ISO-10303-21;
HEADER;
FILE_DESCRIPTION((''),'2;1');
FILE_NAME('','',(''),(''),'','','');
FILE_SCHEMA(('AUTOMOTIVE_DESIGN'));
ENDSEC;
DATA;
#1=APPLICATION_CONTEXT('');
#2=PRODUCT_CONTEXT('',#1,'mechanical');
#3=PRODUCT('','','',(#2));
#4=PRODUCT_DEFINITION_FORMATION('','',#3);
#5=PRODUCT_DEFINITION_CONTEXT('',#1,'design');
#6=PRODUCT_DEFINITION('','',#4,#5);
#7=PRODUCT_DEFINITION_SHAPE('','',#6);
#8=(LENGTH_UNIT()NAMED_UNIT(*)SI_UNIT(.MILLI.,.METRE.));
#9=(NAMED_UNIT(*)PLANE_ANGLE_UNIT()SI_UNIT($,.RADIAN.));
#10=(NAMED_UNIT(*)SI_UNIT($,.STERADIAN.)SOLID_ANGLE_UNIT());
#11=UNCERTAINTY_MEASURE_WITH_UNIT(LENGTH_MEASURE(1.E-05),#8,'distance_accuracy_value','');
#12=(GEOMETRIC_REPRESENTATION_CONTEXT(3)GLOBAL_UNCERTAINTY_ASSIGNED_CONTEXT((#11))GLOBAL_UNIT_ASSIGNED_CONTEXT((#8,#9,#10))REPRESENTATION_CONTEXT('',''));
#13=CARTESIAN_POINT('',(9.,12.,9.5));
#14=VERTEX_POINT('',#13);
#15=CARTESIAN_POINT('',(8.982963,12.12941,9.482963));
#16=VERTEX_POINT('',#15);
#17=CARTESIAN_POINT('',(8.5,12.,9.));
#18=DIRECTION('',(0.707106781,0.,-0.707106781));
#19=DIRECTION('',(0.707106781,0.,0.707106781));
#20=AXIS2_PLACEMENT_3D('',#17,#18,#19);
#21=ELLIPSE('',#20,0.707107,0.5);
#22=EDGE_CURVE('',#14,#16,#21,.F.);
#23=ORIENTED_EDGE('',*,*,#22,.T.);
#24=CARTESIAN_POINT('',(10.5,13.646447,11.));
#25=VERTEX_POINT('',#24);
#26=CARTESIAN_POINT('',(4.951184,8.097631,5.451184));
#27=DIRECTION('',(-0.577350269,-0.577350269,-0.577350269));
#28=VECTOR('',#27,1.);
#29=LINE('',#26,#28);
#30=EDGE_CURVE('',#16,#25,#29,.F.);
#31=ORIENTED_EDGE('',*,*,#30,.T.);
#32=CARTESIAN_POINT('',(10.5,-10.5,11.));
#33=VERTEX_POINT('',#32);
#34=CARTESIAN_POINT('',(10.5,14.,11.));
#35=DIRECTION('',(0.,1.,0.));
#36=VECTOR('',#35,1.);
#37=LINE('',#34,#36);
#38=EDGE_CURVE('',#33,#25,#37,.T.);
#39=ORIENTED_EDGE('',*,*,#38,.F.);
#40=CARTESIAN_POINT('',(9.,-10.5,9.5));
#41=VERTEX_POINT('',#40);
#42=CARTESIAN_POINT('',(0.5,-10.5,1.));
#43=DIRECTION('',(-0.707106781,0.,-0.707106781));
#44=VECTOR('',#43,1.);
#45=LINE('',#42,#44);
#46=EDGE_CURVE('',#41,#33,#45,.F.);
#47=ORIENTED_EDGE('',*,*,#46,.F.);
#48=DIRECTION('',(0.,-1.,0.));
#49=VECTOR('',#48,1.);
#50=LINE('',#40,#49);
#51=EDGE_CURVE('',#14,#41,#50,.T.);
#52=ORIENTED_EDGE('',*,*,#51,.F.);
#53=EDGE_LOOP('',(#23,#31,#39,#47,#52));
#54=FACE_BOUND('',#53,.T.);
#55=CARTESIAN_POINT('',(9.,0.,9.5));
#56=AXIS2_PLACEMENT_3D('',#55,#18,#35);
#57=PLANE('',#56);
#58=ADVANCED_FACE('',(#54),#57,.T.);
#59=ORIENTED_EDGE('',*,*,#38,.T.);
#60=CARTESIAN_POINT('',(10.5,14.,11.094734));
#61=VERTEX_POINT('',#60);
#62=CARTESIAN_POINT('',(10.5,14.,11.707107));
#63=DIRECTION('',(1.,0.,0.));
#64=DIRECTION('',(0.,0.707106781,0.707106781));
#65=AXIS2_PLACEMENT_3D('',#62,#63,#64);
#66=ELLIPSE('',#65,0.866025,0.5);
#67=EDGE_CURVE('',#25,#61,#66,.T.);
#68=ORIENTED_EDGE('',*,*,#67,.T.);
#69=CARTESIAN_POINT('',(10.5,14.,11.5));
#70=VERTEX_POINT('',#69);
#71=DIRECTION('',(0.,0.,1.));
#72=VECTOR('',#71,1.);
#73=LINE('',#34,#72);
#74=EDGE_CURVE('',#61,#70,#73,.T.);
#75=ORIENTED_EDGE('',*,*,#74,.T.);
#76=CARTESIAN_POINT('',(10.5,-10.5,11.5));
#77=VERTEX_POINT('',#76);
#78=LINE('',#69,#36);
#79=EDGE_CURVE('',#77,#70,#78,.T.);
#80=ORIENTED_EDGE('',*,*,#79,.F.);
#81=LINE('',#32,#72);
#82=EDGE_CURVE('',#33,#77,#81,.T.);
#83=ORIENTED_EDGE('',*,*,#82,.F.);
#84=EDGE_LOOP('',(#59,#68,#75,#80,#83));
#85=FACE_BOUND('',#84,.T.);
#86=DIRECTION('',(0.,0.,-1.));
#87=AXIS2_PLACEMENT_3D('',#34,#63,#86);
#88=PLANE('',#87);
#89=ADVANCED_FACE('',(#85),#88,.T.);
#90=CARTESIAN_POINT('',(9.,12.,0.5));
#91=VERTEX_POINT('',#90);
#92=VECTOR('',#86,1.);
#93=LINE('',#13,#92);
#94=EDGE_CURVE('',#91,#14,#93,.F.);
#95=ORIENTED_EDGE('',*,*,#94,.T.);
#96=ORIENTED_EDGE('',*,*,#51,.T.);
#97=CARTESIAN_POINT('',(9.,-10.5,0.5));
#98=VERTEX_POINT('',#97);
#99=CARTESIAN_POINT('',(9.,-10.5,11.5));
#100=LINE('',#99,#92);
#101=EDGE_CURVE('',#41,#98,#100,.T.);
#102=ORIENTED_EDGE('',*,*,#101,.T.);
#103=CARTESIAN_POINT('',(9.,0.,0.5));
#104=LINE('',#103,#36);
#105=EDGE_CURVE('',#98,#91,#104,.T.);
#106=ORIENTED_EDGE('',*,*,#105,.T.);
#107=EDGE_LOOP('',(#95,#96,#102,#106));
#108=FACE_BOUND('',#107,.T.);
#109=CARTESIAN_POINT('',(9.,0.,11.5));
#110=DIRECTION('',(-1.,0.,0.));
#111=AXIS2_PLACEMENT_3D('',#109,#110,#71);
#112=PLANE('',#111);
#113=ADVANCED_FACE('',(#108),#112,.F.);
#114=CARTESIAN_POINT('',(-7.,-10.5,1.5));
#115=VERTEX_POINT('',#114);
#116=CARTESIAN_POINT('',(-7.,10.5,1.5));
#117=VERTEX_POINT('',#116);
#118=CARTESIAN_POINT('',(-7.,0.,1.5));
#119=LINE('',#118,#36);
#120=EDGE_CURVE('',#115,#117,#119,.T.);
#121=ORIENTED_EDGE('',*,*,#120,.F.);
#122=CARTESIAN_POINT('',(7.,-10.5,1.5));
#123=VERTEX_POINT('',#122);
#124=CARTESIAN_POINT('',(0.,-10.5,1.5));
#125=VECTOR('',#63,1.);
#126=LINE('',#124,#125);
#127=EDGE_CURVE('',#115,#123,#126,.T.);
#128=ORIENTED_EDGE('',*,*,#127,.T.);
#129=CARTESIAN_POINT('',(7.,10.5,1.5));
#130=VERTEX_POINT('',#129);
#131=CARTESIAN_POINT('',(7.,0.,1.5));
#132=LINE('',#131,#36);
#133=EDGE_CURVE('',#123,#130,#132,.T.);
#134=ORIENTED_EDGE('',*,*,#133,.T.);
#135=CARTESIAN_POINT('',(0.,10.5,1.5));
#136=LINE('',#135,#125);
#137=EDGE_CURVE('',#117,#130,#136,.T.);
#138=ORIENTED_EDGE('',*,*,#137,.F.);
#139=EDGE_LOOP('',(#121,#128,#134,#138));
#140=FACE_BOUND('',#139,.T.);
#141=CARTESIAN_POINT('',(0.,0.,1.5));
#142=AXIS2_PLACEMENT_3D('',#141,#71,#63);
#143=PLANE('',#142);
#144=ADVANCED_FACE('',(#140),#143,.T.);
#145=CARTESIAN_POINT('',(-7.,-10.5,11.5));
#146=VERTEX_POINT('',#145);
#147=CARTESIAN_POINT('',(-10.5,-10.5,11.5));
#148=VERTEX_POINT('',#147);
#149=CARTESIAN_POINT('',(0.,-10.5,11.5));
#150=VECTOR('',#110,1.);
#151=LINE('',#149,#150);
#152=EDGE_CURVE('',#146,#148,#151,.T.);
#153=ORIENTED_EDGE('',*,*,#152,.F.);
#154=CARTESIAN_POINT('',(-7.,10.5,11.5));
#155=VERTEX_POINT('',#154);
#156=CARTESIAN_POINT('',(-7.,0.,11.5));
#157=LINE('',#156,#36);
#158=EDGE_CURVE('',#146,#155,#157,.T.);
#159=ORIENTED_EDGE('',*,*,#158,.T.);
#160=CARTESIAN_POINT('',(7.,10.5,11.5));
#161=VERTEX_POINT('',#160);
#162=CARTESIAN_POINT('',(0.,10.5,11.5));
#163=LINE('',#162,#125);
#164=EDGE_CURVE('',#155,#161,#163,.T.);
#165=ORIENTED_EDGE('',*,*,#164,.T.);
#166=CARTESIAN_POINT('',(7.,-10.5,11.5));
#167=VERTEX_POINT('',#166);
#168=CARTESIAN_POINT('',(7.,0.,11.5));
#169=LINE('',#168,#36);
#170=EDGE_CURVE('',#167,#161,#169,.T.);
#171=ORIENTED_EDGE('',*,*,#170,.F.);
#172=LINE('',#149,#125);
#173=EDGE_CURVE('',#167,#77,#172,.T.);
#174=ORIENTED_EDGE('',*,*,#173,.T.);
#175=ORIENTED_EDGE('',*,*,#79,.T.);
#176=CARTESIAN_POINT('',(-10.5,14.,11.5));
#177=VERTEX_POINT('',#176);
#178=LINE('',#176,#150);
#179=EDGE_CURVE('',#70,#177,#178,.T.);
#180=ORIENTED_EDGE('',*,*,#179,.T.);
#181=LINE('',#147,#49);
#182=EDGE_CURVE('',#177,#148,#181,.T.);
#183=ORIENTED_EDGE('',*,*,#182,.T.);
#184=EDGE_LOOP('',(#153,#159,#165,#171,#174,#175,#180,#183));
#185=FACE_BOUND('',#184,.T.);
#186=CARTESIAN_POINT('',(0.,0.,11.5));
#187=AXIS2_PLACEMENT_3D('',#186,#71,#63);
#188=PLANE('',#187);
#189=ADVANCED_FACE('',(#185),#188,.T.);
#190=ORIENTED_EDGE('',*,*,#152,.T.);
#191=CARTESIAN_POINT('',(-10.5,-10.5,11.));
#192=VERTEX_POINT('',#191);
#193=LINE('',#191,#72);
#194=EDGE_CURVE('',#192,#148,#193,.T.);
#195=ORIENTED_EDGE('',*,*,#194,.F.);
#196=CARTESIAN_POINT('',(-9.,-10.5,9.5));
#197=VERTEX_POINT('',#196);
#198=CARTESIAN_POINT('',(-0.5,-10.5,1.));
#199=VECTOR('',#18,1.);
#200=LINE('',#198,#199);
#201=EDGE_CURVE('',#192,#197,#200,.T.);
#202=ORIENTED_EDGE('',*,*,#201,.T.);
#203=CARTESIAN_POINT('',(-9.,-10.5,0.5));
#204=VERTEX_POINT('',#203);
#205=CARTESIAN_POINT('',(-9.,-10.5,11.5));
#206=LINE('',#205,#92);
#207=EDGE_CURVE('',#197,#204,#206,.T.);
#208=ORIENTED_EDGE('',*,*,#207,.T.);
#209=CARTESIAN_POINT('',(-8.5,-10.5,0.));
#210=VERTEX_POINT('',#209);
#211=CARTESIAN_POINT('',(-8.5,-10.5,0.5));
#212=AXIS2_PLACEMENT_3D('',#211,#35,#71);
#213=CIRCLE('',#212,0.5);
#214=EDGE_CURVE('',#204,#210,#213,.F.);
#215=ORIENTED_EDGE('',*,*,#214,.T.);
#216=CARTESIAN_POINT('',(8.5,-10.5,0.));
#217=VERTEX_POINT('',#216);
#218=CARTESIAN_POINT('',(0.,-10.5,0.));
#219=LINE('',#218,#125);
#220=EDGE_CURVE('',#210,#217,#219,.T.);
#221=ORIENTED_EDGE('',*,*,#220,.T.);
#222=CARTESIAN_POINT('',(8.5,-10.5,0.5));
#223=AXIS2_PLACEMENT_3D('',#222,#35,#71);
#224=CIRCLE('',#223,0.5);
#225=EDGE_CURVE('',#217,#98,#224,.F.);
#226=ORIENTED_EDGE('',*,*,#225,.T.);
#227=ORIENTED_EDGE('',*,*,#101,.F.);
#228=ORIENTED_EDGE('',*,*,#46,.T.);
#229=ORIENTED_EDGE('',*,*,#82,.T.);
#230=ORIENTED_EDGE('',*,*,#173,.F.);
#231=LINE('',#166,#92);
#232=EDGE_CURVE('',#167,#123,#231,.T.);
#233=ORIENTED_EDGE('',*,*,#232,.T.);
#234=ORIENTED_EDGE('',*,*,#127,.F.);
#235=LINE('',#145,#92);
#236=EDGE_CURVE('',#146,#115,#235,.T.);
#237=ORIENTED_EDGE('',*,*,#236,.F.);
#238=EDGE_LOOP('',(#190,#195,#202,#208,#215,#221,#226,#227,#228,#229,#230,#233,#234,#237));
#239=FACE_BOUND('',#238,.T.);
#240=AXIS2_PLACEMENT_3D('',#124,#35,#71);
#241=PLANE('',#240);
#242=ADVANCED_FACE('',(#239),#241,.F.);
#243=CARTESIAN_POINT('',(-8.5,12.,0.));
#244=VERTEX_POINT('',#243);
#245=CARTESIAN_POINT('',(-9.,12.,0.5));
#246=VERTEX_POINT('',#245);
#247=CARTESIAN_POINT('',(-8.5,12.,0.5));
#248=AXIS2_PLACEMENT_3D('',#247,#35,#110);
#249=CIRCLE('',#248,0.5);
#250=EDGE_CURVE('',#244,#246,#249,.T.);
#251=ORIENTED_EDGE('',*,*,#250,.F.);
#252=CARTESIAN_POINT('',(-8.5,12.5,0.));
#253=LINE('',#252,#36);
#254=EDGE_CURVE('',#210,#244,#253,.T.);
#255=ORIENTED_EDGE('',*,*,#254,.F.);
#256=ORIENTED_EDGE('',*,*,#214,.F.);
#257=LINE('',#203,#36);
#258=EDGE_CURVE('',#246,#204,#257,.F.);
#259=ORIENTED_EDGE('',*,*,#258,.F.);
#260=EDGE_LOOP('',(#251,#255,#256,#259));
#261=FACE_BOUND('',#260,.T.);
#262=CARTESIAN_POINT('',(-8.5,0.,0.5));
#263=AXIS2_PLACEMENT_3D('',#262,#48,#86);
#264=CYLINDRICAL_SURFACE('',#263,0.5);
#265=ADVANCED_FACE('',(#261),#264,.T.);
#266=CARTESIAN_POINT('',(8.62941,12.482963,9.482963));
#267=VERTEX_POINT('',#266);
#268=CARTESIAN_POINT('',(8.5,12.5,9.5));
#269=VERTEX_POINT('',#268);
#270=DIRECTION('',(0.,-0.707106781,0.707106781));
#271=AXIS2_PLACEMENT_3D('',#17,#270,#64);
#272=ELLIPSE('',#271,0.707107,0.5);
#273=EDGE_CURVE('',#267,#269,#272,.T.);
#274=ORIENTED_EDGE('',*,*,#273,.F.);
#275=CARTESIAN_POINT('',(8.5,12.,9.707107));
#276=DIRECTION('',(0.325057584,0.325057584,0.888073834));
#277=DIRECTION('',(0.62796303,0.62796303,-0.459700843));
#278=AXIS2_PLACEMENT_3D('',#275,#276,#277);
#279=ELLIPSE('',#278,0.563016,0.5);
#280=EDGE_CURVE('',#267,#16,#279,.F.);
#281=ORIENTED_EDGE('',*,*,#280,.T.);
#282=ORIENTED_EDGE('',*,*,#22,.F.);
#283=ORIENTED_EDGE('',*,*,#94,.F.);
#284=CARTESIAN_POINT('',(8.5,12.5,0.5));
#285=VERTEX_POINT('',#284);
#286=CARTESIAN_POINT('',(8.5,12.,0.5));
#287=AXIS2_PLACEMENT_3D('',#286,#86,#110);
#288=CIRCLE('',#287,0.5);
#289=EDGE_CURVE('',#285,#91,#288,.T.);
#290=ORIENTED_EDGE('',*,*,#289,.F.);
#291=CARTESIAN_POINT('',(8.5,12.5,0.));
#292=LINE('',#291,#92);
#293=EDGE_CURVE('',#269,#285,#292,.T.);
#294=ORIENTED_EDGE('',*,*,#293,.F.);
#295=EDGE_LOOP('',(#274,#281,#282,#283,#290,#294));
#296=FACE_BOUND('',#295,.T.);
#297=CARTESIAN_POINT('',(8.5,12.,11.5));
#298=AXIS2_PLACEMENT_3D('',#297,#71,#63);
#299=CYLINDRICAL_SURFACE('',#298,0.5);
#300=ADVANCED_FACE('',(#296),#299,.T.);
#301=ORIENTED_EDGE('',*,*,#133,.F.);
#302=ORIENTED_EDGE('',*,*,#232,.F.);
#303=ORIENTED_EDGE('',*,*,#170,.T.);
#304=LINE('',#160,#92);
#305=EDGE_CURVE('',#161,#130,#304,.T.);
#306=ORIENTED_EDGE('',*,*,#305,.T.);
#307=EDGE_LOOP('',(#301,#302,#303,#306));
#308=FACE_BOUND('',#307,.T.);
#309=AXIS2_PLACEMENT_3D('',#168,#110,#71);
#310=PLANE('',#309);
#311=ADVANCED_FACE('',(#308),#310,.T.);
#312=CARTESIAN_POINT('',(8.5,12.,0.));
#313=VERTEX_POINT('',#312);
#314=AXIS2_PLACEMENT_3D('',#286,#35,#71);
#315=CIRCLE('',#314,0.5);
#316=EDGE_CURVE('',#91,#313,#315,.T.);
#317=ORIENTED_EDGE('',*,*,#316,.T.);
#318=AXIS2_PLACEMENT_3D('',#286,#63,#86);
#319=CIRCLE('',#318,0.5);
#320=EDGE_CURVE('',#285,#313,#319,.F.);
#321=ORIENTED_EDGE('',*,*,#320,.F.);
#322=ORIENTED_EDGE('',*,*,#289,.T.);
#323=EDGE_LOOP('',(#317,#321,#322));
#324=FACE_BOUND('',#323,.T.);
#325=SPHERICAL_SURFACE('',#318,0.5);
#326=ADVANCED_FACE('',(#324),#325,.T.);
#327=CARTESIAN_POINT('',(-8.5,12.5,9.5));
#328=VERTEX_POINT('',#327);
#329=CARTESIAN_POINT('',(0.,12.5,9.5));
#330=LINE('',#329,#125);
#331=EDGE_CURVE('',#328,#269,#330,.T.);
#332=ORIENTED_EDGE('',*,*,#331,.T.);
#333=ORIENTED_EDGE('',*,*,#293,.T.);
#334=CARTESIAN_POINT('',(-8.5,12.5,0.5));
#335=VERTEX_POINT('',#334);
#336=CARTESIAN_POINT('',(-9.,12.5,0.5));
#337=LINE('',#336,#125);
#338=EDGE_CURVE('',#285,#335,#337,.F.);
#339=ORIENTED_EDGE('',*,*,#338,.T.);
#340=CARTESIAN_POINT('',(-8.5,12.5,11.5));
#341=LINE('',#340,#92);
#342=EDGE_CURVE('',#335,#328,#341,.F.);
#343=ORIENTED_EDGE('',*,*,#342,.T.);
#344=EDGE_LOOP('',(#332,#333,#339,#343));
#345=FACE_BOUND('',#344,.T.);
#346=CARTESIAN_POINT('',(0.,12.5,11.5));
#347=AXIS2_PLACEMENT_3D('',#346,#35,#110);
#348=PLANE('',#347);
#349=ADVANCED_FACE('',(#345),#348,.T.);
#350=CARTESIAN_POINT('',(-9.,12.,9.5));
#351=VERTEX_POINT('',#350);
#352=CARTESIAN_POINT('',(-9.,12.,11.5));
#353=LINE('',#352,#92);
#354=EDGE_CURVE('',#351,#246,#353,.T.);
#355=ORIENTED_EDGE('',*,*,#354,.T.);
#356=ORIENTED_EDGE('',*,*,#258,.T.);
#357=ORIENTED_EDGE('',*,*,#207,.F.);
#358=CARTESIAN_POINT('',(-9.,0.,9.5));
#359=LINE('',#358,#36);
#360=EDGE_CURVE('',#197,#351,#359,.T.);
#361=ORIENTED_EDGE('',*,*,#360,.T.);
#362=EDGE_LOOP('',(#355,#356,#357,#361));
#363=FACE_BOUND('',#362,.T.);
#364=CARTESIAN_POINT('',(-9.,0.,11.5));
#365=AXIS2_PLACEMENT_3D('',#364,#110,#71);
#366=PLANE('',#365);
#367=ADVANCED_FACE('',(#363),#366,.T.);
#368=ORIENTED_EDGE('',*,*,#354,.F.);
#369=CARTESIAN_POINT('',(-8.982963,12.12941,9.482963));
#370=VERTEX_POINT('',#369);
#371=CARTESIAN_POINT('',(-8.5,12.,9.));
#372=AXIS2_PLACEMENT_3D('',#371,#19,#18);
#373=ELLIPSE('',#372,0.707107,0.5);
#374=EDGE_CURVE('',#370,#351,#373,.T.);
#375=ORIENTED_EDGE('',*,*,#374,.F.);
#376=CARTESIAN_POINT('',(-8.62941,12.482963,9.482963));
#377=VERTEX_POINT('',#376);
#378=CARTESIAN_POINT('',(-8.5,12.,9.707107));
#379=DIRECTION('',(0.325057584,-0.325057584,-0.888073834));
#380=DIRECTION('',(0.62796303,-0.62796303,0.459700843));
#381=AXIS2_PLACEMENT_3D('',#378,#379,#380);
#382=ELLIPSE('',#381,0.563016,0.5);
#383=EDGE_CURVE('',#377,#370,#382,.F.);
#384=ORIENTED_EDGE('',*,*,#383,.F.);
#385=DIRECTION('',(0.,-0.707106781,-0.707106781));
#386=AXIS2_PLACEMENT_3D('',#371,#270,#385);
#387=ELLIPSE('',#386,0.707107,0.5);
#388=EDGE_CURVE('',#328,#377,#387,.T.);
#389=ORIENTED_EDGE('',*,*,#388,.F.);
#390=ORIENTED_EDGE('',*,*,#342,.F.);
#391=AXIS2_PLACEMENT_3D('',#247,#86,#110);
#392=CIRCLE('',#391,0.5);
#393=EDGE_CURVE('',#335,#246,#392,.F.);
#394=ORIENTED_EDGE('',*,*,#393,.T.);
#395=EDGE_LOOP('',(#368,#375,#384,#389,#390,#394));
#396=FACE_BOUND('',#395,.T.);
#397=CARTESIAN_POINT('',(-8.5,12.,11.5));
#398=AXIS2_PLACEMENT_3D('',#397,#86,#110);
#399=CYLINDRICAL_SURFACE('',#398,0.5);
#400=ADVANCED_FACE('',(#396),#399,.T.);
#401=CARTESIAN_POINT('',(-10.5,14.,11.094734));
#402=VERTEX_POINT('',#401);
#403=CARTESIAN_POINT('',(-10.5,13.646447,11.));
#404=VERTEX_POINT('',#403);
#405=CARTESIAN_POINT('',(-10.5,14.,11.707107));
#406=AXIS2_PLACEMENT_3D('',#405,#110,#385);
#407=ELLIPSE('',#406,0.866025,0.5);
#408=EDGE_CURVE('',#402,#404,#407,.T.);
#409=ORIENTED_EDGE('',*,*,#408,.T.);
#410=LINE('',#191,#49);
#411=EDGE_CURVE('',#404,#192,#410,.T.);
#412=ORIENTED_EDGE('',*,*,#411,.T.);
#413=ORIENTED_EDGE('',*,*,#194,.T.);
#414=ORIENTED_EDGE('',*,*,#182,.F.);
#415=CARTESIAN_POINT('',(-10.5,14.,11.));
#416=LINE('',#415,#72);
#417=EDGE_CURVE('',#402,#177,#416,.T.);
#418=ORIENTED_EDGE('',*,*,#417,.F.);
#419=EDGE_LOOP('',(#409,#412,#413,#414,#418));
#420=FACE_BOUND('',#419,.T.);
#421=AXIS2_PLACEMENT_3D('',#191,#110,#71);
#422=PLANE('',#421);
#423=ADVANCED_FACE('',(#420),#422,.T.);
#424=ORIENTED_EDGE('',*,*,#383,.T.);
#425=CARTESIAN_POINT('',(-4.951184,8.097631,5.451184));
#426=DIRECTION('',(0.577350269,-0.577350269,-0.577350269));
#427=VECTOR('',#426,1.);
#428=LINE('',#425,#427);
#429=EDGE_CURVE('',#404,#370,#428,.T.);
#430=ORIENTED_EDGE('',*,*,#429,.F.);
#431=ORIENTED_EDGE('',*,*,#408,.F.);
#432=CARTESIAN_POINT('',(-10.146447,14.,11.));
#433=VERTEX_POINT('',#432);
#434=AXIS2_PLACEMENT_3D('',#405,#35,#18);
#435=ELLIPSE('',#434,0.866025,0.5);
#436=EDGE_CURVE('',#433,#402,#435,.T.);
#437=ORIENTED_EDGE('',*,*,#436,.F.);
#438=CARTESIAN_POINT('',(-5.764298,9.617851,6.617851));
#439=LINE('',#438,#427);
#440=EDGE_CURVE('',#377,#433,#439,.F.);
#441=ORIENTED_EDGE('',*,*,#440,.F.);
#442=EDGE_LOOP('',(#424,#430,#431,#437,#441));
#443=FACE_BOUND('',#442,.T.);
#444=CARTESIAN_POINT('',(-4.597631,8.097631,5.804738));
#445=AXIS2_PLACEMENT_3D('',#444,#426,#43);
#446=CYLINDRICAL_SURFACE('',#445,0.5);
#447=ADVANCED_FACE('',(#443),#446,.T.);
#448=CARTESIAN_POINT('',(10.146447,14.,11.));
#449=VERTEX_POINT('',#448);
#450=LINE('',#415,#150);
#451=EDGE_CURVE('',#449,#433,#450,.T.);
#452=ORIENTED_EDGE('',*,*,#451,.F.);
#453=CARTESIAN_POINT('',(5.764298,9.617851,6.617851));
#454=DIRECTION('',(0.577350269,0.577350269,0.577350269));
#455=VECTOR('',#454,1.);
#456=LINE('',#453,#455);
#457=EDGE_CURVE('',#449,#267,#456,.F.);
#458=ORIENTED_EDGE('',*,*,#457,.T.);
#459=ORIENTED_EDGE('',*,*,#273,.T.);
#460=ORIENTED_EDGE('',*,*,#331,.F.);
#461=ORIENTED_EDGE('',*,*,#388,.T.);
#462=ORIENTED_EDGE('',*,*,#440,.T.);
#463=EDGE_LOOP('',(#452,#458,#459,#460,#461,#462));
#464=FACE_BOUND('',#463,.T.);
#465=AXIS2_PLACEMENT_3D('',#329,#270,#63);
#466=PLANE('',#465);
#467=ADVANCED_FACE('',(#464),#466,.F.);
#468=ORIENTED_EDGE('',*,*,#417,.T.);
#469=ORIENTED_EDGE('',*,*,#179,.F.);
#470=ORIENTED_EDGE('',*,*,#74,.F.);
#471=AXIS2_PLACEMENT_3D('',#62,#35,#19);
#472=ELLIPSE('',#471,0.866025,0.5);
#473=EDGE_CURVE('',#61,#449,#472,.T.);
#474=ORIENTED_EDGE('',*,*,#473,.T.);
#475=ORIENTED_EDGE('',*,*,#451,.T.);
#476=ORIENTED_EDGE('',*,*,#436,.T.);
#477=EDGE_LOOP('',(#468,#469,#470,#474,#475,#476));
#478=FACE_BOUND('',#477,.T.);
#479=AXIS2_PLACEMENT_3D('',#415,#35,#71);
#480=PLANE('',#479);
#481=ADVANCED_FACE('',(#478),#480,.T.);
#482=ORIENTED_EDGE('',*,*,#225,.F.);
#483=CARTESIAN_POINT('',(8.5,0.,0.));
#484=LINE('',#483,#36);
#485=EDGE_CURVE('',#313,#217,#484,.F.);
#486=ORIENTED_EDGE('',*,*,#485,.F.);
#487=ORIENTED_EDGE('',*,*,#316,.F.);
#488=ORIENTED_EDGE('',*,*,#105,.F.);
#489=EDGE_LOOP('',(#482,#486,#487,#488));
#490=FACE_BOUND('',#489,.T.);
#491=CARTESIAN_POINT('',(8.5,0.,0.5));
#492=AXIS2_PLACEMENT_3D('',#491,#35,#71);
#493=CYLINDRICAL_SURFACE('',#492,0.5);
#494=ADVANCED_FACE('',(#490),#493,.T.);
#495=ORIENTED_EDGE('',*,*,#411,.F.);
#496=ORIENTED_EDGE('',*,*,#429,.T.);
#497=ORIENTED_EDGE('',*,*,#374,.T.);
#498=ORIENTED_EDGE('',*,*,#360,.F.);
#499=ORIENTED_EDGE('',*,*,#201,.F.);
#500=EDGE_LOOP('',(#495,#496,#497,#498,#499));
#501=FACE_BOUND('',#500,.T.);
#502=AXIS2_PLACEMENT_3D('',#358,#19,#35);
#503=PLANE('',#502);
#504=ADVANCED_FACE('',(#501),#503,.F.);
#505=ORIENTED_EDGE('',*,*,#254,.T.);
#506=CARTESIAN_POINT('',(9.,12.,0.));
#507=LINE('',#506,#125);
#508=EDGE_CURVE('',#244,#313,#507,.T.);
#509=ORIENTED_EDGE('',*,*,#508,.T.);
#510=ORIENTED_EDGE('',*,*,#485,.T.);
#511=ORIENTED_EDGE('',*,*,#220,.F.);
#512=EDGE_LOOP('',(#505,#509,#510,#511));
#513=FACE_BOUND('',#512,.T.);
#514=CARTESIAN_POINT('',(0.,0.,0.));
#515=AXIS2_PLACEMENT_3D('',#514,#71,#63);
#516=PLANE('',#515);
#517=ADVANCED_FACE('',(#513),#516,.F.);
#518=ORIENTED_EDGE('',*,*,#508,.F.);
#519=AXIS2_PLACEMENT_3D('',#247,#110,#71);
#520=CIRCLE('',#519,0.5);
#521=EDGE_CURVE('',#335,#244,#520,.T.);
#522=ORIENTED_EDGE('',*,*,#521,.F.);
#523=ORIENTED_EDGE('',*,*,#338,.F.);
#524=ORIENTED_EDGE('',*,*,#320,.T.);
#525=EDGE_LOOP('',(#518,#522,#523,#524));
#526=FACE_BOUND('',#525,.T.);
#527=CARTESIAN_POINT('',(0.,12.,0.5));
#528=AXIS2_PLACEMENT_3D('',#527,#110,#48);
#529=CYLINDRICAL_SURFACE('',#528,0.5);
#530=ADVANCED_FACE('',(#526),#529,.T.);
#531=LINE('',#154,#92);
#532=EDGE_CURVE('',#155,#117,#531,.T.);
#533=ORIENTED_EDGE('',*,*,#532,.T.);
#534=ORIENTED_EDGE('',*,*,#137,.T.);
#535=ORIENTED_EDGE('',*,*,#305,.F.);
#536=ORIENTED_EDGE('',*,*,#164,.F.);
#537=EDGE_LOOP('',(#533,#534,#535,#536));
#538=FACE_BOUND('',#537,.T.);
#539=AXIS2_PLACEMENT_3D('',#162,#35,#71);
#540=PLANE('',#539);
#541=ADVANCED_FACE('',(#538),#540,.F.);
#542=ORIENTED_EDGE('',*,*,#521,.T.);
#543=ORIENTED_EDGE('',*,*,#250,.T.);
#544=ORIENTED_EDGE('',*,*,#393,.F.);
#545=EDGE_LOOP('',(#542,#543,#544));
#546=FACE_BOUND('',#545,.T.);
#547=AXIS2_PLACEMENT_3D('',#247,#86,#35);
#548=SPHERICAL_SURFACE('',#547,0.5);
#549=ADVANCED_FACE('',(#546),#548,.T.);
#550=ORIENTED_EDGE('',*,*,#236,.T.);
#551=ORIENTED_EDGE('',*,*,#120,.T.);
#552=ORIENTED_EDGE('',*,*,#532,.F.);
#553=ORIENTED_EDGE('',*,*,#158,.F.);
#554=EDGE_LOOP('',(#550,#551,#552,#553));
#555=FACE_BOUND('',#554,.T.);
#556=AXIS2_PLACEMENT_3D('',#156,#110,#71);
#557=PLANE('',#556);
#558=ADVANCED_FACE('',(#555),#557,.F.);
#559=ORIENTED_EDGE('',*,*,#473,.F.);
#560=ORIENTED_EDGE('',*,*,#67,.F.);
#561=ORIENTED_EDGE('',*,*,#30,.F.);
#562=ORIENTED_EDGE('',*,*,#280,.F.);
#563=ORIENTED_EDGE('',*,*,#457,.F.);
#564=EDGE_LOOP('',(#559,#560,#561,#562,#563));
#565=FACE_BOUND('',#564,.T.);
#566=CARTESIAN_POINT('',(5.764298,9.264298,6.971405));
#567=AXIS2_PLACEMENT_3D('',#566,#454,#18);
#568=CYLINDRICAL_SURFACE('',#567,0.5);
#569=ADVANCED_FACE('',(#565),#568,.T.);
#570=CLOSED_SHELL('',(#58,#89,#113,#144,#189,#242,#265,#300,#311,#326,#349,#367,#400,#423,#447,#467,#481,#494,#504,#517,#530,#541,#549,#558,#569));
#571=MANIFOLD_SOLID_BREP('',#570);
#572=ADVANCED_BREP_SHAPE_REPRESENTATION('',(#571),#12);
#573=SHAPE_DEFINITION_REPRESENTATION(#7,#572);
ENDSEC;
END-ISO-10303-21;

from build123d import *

# Parameters (mm, degrees)
SKETCH1_W           = 14
SKETCH1_H           = 21
BOSS_EXTRUDE1_DEPTH = 1.5
BOSS_EXTRUDE2_DEPTH = 11.5
BOSS_EXTRUDE3_DEPTH = 0.5
CHAMFER1_SIZE       = 1.5
FILLET1_R           = 0.5


# Some blends are built 0.0001 mm under size
with BuildPart() as part:
    # Sketch1 → Boss-Extrude1 (new body)
    with BuildSketch(Plane.XY):
        Rectangle(SKETCH1_W, SKETCH1_H)
    extrude(amount=BOSS_EXTRUDE1_DEPTH)

    # Sketch1<4> → Boss-Extrude2 (add)
    with BuildSketch(Plane.XY):
        Polygon((-9, 12.5), (-9, -10.5), (-7, -10.5), (-7, 10.5), (7, 10.5), (7, -10.5), (9, -10.5), (9, 12.5), align=None)
    extrude(amount=BOSS_EXTRUDE2_DEPTH)

    # Sketch2 → Boss-Extrude3 (add)
    with BuildSketch(Plane.XY.offset(11.5)):
        Polygon((-9, -10.5), (-9, 12.5), (9, 12.5), (9, -10.5), (10.5, -10.5), (10.5, 14), (-10.5, 14), (-10.5, -10.5), align=None)
    extrude(amount=-BOSS_EXTRUDE3_DEPTH)

    # Chamfer1
    chamfer1_edges = [part.edges().sort_by_distance(p)[0] for p in [
        (-9, 1, 11),
        (0, 12.5, 11),
        (9, 1, 11),
    ]]
    chamfer(chamfer1_edges, length=CHAMFER1_SIZE - 0.0001)  # a hair under: the kernel refuses the full size

    # Fillet1
    # the kernel refuses this fillet: 0.5 mm, written as the material it takes off along each edge
    with BuildSketch(Plane(origin=(8.5, 12, 0.5), x_dir=(0, 0, -1), z_dir=(0, 1, 0))) as fillet1_piece_1_section:
        Polygon((0, 0), (FILLET1_R * 1.02, 0), (FILLET1_R * 1.02, -FILLET1_R * 1.02), (0, -FILLET1_R * 1.02), align=None)
    fillet1_piece_1 = extrude(amount=FILLET1_R * 1.02, mode=Mode.PRIVATE)
    fillet1_piece_1 = fillet1_piece_1 - Plane(origin=(8.5, 12, 0.5), x_dir=(-0.7071067811865475, 0, 0.7071067811865475), z_dir=(0, 1, 0)) * Sphere(FILLET1_R, mode=Mode.PRIVATE)
    add(fillet1_piece_1, mode=Mode.SUBTRACT)
    with BuildSketch(Plane(origin=(-8.5, 12, 0.5), x_dir=(0, 0, -1), z_dir=(-1, 0, 0))) as fillet1_piece_2_section:
        Polygon((0, 0), (FILLET1_R * 1.02, 0), (FILLET1_R * 1.02, -FILLET1_R * 1.02), (0, -FILLET1_R * 1.02), align=None)
    fillet1_piece_2 = extrude(amount=FILLET1_R * 1.02, mode=Mode.PRIVATE)
    fillet1_piece_2 = fillet1_piece_2 - Plane(origin=(-8.5, 12, 0.5), x_dir=(0, -0.7071067811865475, 0.7071067811865475), z_dir=(-1, 0, 0)) * Sphere(FILLET1_R, mode=Mode.PRIVATE)
    add(fillet1_piece_2, mode=Mode.SUBTRACT)
    with BuildSketch(Plane(origin=(9, -11.75, 0), x_dir=(-1, 0, 0), z_dir=(0, 1, 0))) as fillet1_piece_3:
        with BuildLine():
            CenterArc((FILLET1_R, FILLET1_R), FILLET1_R, 180, 90)
            Line((0, FILLET1_R), (-FILLET1_R * 0.02, FILLET1_R))
            Line((-FILLET1_R * 0.02, FILLET1_R), (-FILLET1_R * 0.02, -FILLET1_R * 0.02))
            Line((-FILLET1_R * 0.02, -FILLET1_R * 0.02), (FILLET1_R, -FILLET1_R * 0.02))
            Line((FILLET1_R, -FILLET1_R * 0.02), (FILLET1_R, 0))
        make_face()
    extrude(amount=23.75, mode=Mode.SUBTRACT)
    with BuildSketch(Plane(origin=(-9, 12, 0), x_dir=(0, 0, 1), z_dir=(0, -1, 0))) as fillet1_piece_4:
        with BuildLine():
            CenterArc((FILLET1_R, -FILLET1_R), FILLET1_R, 90, 90)
            Line((0, -FILLET1_R), (-FILLET1_R * 0.02, -FILLET1_R))
            Line((-FILLET1_R * 0.02, -FILLET1_R), (-FILLET1_R * 0.02, FILLET1_R * 0.02))
            Line((-FILLET1_R * 0.02, FILLET1_R * 0.02), (FILLET1_R, FILLET1_R * 0.02))
            Line((FILLET1_R, FILLET1_R * 0.02), (FILLET1_R, 0))
        make_face()
    extrude(amount=23.75, mode=Mode.SUBTRACT)
    with BuildSketch(Plane(origin=(8.5, 12.5, 0), x_dir=(0, -1, 0), z_dir=(-1, 0, 0))) as fillet1_piece_5:
        with BuildLine():
            CenterArc((FILLET1_R, FILLET1_R), FILLET1_R, 180, 90)
            Line((0, FILLET1_R), (-FILLET1_R * 0.02, FILLET1_R))
            Line((-FILLET1_R * 0.02, FILLET1_R), (-FILLET1_R * 0.02, -FILLET1_R * 0.02))
            Line((-FILLET1_R * 0.02, -FILLET1_R * 0.02), (FILLET1_R, -FILLET1_R * 0.02))
            Line((FILLET1_R, -FILLET1_R * 0.02), (FILLET1_R, 0))
        make_face()
    extrude(amount=17, mode=Mode.SUBTRACT)
    with BuildSketch(Plane(origin=(-9, 12.5, 0.5), x_dir=(0, -1, 0), z_dir=(0, 0, 1))) as fillet1_piece_6_section:
        with BuildLine():
            CenterArc((FILLET1_R, FILLET1_R), FILLET1_R, 180, 90)
            Line((0, FILLET1_R), (-FILLET1_R * 0.02, FILLET1_R))
            Line((-FILLET1_R * 0.02, FILLET1_R), (-FILLET1_R * 0.02, -FILLET1_R * 0.02))
            Line((-FILLET1_R * 0.02, -FILLET1_R * 0.02), (FILLET1_R, -FILLET1_R * 0.02))
            Line((FILLET1_R, -FILLET1_R * 0.02), (FILLET1_R, 0))
        make_face()
    fillet1_piece_6 = extrude(amount=10.2501, mode=Mode.PRIVATE)
    fillet1_piece_6 = split(fillet1_piece_6, bisect_by=Plane(origin=(-6.646616443, 12.387329395, 7.146716443), z_dir=(-0.7071067811865476, 0, -0.7071067811865476)), keep=Keep.TOP, mode=Mode.PRIVATE)
    fillet1_piece_6 = split(fillet1_piece_6, bisect_by=Plane(origin=(-8.887329395, 10.146616443, 7.146716443), z_dir=(0, 0.7071067811865476, -0.7071067811865476)), keep=Keep.TOP, mode=Mode.PRIVATE)
    add(fillet1_piece_6, mode=Mode.SUBTRACT)
    with BuildSketch(Plane(origin=(-9, 12.5, 0.5), x_dir=(0, -1, 0), z_dir=(0, 0, 1))) as fillet1_piece_7_section:
        with BuildLine():
            CenterArc((FILLET1_R, FILLET1_R), FILLET1_R, 180, 90)
            Line((0, FILLET1_R), (-FILLET1_R * 0.02, FILLET1_R))
            Line((-FILLET1_R * 0.02, FILLET1_R), (-FILLET1_R * 0.02, -FILLET1_R * 0.02))
            Line((-FILLET1_R * 0.02, -FILLET1_R * 0.02), (FILLET1_R, -FILLET1_R * 0.02))
            Line((FILLET1_R, -FILLET1_R * 0.02), (FILLET1_R, 0))
        make_face()
    fillet1_piece_7 = extrude(amount=10.2501, mode=Mode.PRIVATE)
    fillet1_piece_7 = split(fillet1_piece_7, bisect_by=Plane(origin=(-8.796279433, 12.478509021, 9.296379433), z_dir=(0.7071067811865476, 0, 0.7071067811865476)), keep=Keep.TOP, mode=Mode.PRIVATE)
    fillet1_piece_7 = split(fillet1_piece_7, bisect_by=Plane(origin=(-8.735536236, 12.417765825, 9.417865825), z_dir=(0, 0.7071067811865476, -0.7071067811865476)), keep=Keep.TOP, mode=Mode.PRIVATE)
    add(fillet1_piece_7, mode=Mode.SUBTRACT)
    with BuildSketch(Plane(origin=(-9, 12.5, 0.5), x_dir=(0, -1, 0), z_dir=(0, 0, 1))) as fillet1_piece_8_section:
        with BuildLine():
            CenterArc((FILLET1_R, FILLET1_R), FILLET1_R, 180, 90)
            Line((0, FILLET1_R), (-FILLET1_R * 0.02, FILLET1_R))
            Line((-FILLET1_R * 0.02, FILLET1_R), (-FILLET1_R * 0.02, -FILLET1_R * 0.02))
            Line((-FILLET1_R * 0.02, -FILLET1_R * 0.02), (FILLET1_R, -FILLET1_R * 0.02))
            Line((FILLET1_R, -FILLET1_R * 0.02), (FILLET1_R, 0))
        make_face()
    fillet1_piece_8 = extrude(amount=10.2501, mode=Mode.PRIVATE)
    fillet1_piece_8 = split(fillet1_piece_8, bisect_by=Plane(origin=(-8.917765825, 12.235536236, 9.417865825), z_dir=(-0.7071067811865476, 0, -0.7071067811865476)), keep=Keep.TOP, mode=Mode.PRIVATE)
    fillet1_piece_8 = split(fillet1_piece_8, bisect_by=Plane(origin=(-8.978509021, 12.296279433, 9.296379433), z_dir=(0, -0.7071067811865476, 0.7071067811865476)), keep=Keep.TOP, mode=Mode.PRIVATE)
    add(fillet1_piece_8, mode=Mode.SUBTRACT)
    with BuildSketch(Plane(origin=(9, 12.5, 0.5), x_dir=(0, -1, 0), z_dir=(0, 0, 1))) as fillet1_piece_9_section:
        with BuildLine():
            CenterArc((FILLET1_R, -FILLET1_R), FILLET1_R, 90, 90)
            Line((0, -FILLET1_R), (-FILLET1_R * 0.02, -FILLET1_R))
            Line((-FILLET1_R * 0.02, -FILLET1_R), (-FILLET1_R * 0.02, FILLET1_R * 0.02))
            Line((-FILLET1_R * 0.02, FILLET1_R * 0.02), (FILLET1_R, FILLET1_R * 0.02))
            Line((FILLET1_R, FILLET1_R * 0.02), (FILLET1_R, 0))
        make_face()
    fillet1_piece_9 = extrude(amount=10.2501, mode=Mode.PRIVATE)
    fillet1_piece_9 = split(fillet1_piece_9, bisect_by=Plane(origin=(6.646616443, 12.387329395, 7.146716443), z_dir=(0.7071067811865476, 0, -0.7071067811865476)), keep=Keep.TOP, mode=Mode.PRIVATE)
    fillet1_piece_9 = split(fillet1_piece_9, bisect_by=Plane(origin=(8.887329395, 10.146616443, 7.146716443), z_dir=(0, 0.7071067811865476, -0.7071067811865476)), keep=Keep.TOP, mode=Mode.PRIVATE)
    add(fillet1_piece_9, mode=Mode.SUBTRACT)
    with BuildSketch(Plane(origin=(9, 12.5, 0.5), x_dir=(0, -1, 0), z_dir=(0, 0, 1))) as fillet1_piece_10_section:
        with BuildLine():
            CenterArc((FILLET1_R, -FILLET1_R), FILLET1_R, 90, 90)
            Line((0, -FILLET1_R), (-FILLET1_R * 0.02, -FILLET1_R))
            Line((-FILLET1_R * 0.02, -FILLET1_R), (-FILLET1_R * 0.02, FILLET1_R * 0.02))
            Line((-FILLET1_R * 0.02, FILLET1_R * 0.02), (FILLET1_R, FILLET1_R * 0.02))
            Line((FILLET1_R, FILLET1_R * 0.02), (FILLET1_R, 0))
        make_face()
    fillet1_piece_10 = extrude(amount=10.2501, mode=Mode.PRIVATE)
    fillet1_piece_10 = split(fillet1_piece_10, bisect_by=Plane(origin=(8.796279433, 12.478509021, 9.296379433), z_dir=(-0.7071067811865476, 0, 0.7071067811865476)), keep=Keep.TOP, mode=Mode.PRIVATE)
    fillet1_piece_10 = split(fillet1_piece_10, bisect_by=Plane(origin=(8.735536236, 12.417765825, 9.417865825), z_dir=(0, 0.7071067811865476, -0.7071067811865476)), keep=Keep.TOP, mode=Mode.PRIVATE)
    add(fillet1_piece_10, mode=Mode.SUBTRACT)
    with BuildSketch(Plane(origin=(9, 12.5, 0.5), x_dir=(0, -1, 0), z_dir=(0, 0, 1))) as fillet1_piece_11_section:
        with BuildLine():
            CenterArc((FILLET1_R, -FILLET1_R), FILLET1_R, 90, 90)
            Line((0, -FILLET1_R), (-FILLET1_R * 0.02, -FILLET1_R))
            Line((-FILLET1_R * 0.02, -FILLET1_R), (-FILLET1_R * 0.02, FILLET1_R * 0.02))
            Line((-FILLET1_R * 0.02, FILLET1_R * 0.02), (FILLET1_R, FILLET1_R * 0.02))
            Line((FILLET1_R, FILLET1_R * 0.02), (FILLET1_R, 0))
        make_face()
    fillet1_piece_11 = extrude(amount=10.2501, mode=Mode.PRIVATE)
    fillet1_piece_11 = split(fillet1_piece_11, bisect_by=Plane(origin=(8.917765825, 12.235536236, 9.417865825), z_dir=(0.7071067811865476, 0, -0.7071067811865476)), keep=Keep.TOP, mode=Mode.PRIVATE)
    fillet1_piece_11 = split(fillet1_piece_11, bisect_by=Plane(origin=(8.978509021, 12.296279433, 9.296379433), z_dir=(0, -0.7071067811865476, 0.7071067811865476)), keep=Keep.TOP, mode=Mode.PRIVATE)
    add(fillet1_piece_11, mode=Mode.SUBTRACT)
    with BuildSketch(Plane(origin=(8.583333333, 12.083333333, 9.083433333), x_dir=(0.408248290463863, -0.816496580927726, 0.408248290463863), z_dir=(0.5773502691896258, 0.5773502691896258, 0.5773502691896258))) as fillet1_piece_12_section:
        with BuildLine():
            CenterArc((FILLET1_R * 0.57735026919, -FILLET1_R), FILLET1_R, 90, 60)
            Line((-FILLET1_R * 0.288675134595, -FILLET1_R * 0.5), (-FILLET1_R * 0.305995642671, -FILLET1_R * 0.49))
            Line((-FILLET1_R * 0.305995642671, -FILLET1_R * 0.49), (-FILLET1_R * 0.0115470053838, FILLET1_R * 0.02))
            Line((-FILLET1_R * 0.0115470053838, FILLET1_R * 0.02), (FILLET1_R * 0.57735026919, FILLET1_R * 0.02))
            Line((FILLET1_R * 0.57735026919, FILLET1_R * 0.02), (FILLET1_R * 0.57735026919, 0))
        make_face()
    fillet1_piece_12 = extrude(amount=4.041278679, mode=Mode.PRIVATE)
    fillet1_piece_12 = split(fillet1_piece_12, bisect_by=Plane(origin=(9, 12.593724218, 9.60103013), z_dir=(-1, 0, 0)), keep=Keep.TOP, mode=Mode.PRIVATE)
    fillet1_piece_12 = split(fillet1_piece_12, bisect_by=Plane(origin=(8.906275782, 12.5, 9.60103013), z_dir=(0, 1, 0)), keep=Keep.TOP, mode=Mode.PRIVATE)
    add(fillet1_piece_12, mode=Mode.SUBTRACT)
    with BuildSketch(Plane(origin=(8.583333333, 12.083333333, 9.083433333), x_dir=(0.408248290463863, -0.816496580927726, 0.408248290463863), z_dir=(0.5773502691896258, 0.5773502691896258, 0.5773502691896258))) as fillet1_piece_13_section:
        with BuildLine():
            CenterArc((FILLET1_R * 0.57735026919, -FILLET1_R), FILLET1_R, 90, 60)
            Line((-FILLET1_R * 0.288675134595, -FILLET1_R * 0.5), (-FILLET1_R * 0.305995642671, -FILLET1_R * 0.49))
            Line((-FILLET1_R * 0.305995642671, -FILLET1_R * 0.49), (-FILLET1_R * 0.0115470053838, FILLET1_R * 0.02))
            Line((-FILLET1_R * 0.0115470053838, FILLET1_R * 0.02), (FILLET1_R * 0.57735026919, FILLET1_R * 0.02))
            Line((FILLET1_R * 0.57735026919, FILLET1_R * 0.02), (FILLET1_R * 0.57735026919, 0))
        make_face()
    fillet1_piece_13 = extrude(amount=4.041278679, mode=Mode.PRIVATE)
    fillet1_piece_13 = split(fillet1_piece_13, bisect_by=Plane(origin=(9, 12.406275782, 9.60103013), z_dir=(1, 0, 0)), keep=Keep.TOP, mode=Mode.PRIVATE)
    fillet1_piece_13 = split(fillet1_piece_13, bisect_by=Plane(origin=(9.093724218, 12.5, 9.60103013), z_dir=(0, -1, 0)), keep=Keep.TOP, mode=Mode.PRIVATE)
    add(fillet1_piece_13, mode=Mode.SUBTRACT)
    with BuildSketch(Plane(origin=(8.583333333, 12.083333333, 9.083433333), x_dir=(0.408248290463863, -0.816496580927726, 0.408248290463863), z_dir=(0.5773502691896258, 0.5773502691896258, 0.5773502691896258))) as fillet1_piece_14_section:
        with BuildLine():
            CenterArc((FILLET1_R * 0.57735026919, -FILLET1_R), FILLET1_R, 90, 60)
            Line((-FILLET1_R * 0.288675134595, -FILLET1_R * 0.5), (-FILLET1_R * 0.305995642671, -FILLET1_R * 0.49))
            Line((-FILLET1_R * 0.305995642671, -FILLET1_R * 0.49), (-FILLET1_R * 0.0115470053838, FILLET1_R * 0.02))
            Line((-FILLET1_R * 0.0115470053838, FILLET1_R * 0.02), (FILLET1_R * 0.57735026919, FILLET1_R * 0.02))
            Line((FILLET1_R * 0.57735026919, FILLET1_R * 0.02), (FILLET1_R * 0.57735026919, 0))
        make_face()
    fillet1_piece_14 = extrude(amount=4.041278679, mode=Mode.PRIVATE)
    fillet1_piece_14 = split(fillet1_piece_14, bisect_by=Plane(origin=(9.74076552, 13.24076552, 11), z_dir=(0, 0, -1)), keep=Keep.TOP, mode=Mode.PRIVATE)
    fillet1_piece_14 = split(fillet1_piece_14, bisect_by=Plane(origin=(9, 13.24076552, 10.315388184), z_dir=(1, 0, 0)), keep=Keep.TOP, mode=Mode.PRIVATE)
    fillet1_piece_14 = split(fillet1_piece_14, bisect_by=Plane(origin=(9.74076552, 12.5, 10.315388184), z_dir=(0, 1, 0)), keep=Keep.TOP, mode=Mode.PRIVATE)
    add(fillet1_piece_14, mode=Mode.SUBTRACT)
    with BuildSketch(Plane(origin=(8.583333333, 12.083333333, 9.083433333), x_dir=(0.408248290463863, -0.816496580927726, 0.408248290463863), z_dir=(0.5773502691896258, 0.5773502691896258, 0.5773502691896258))) as fillet1_piece_15_section:
        with BuildLine():
            CenterArc((FILLET1_R * 0.57735026919, -FILLET1_R), FILLET1_R, 90, 60)
            Line((-FILLET1_R * 0.288675134595, -FILLET1_R * 0.5), (-FILLET1_R * 0.305995642671, -FILLET1_R * 0.49))
            Line((-FILLET1_R * 0.305995642671, -FILLET1_R * 0.49), (-FILLET1_R * 0.0115470053838, FILLET1_R * 0.02))
            Line((-FILLET1_R * 0.0115470053838, FILLET1_R * 0.02), (FILLET1_R * 0.57735026919, FILLET1_R * 0.02))
            Line((FILLET1_R * 0.57735026919, FILLET1_R * 0.02), (FILLET1_R * 0.57735026919, 0))
        make_face()
    fillet1_piece_15 = extrude(amount=4.041278679, mode=Mode.PRIVATE)
    fillet1_piece_15 = split(fillet1_piece_15, bisect_by=Plane(origin=(10.655826111, 14.155826111, 11), z_dir=(0, 0, 1)), keep=Keep.TOP, mode=Mode.PRIVATE)
    add(fillet1_piece_15, mode=Mode.SUBTRACT)
    with BuildSketch(Plane(origin=(-10.916566667, 14.416566667, 11.416666667), x_dir=(-0.40824829046386607, -0.816496580927726, 0.4082482904638599), z_dir=(0.5773502691896258, -0.5773502691896258, -0.5773502691896258))) as fillet1_piece_16_section:
        with BuildLine():
            CenterArc((FILLET1_R * 0.57735026919, -FILLET1_R), FILLET1_R, 90, 60)
            Line((-FILLET1_R * 0.288675134595, -FILLET1_R * 0.5), (-FILLET1_R * 0.305995642671, -FILLET1_R * 0.49))
            Line((-FILLET1_R * 0.305995642671, -FILLET1_R * 0.49), (-FILLET1_R * 0.0115470053838, FILLET1_R * 0.02))
            Line((-FILLET1_R * 0.0115470053838, FILLET1_R * 0.02), (FILLET1_R * 0.57735026919, FILLET1_R * 0.02))
            Line((FILLET1_R * 0.57735026919, FILLET1_R * 0.02), (FILLET1_R * 0.57735026919, 0))
        make_face()
    fillet1_piece_16 = extrude(amount=4.041278679, mode=Mode.PRIVATE)
    fillet1_piece_16 = split(fillet1_piece_16, bisect_by=Plane(origin=(-10.655826111, 14.155826111, 11), z_dir=(0, 0, 1)), keep=Keep.TOP, mode=Mode.PRIVATE)
    add(fillet1_piece_16, mode=Mode.SUBTRACT)
    with BuildSketch(Plane(origin=(-10.916566667, 14.416566667, 11.416666667), x_dir=(-0.40824829046386607, -0.816496580927726, 0.4082482904638599), z_dir=(0.5773502691896258, -0.5773502691896258, -0.5773502691896258))) as fillet1_piece_17_section:
        with BuildLine():
            CenterArc((FILLET1_R * 0.57735026919, -FILLET1_R), FILLET1_R, 90, 60)
            Line((-FILLET1_R * 0.288675134595, -FILLET1_R * 0.5), (-FILLET1_R * 0.305995642671, -FILLET1_R * 0.49))
            Line((-FILLET1_R * 0.305995642671, -FILLET1_R * 0.49), (-FILLET1_R * 0.0115470053838, FILLET1_R * 0.02))
            Line((-FILLET1_R * 0.0115470053838, FILLET1_R * 0.02), (FILLET1_R * 0.57735026919, FILLET1_R * 0.02))
            Line((FILLET1_R * 0.57735026919, FILLET1_R * 0.02), (FILLET1_R * 0.57735026919, 0))
        make_face()
    fillet1_piece_17 = extrude(amount=4.041278679, mode=Mode.PRIVATE)
    fillet1_piece_17 = split(fillet1_piece_17, bisect_by=Plane(origin=(-9, 13.24076552, 10.315388184), z_dir=(-1, 0, 0)), keep=Keep.TOP, mode=Mode.PRIVATE)
    fillet1_piece_17 = split(fillet1_piece_17, bisect_by=Plane(origin=(-9.74076552, 13.24076552, 11), z_dir=(0, 0, -1)), keep=Keep.TOP, mode=Mode.PRIVATE)
    fillet1_piece_17 = split(fillet1_piece_17, bisect_by=Plane(origin=(-9.74076552, 12.5, 10.315388184), z_dir=(0, 1, 0)), keep=Keep.TOP, mode=Mode.PRIVATE)
    add(fillet1_piece_17, mode=Mode.SUBTRACT)
    with BuildSketch(Plane(origin=(-10.916566667, 14.416566667, 11.416666667), x_dir=(-0.40824829046386607, -0.816496580927726, 0.4082482904638599), z_dir=(0.5773502691896258, -0.5773502691896258, -0.5773502691896258))) as fillet1_piece_18_section:
        with BuildLine():
            CenterArc((FILLET1_R * 0.57735026919, -FILLET1_R), FILLET1_R, 90, 60)
            Line((-FILLET1_R * 0.288675134595, -FILLET1_R * 0.5), (-FILLET1_R * 0.305995642671, -FILLET1_R * 0.49))
            Line((-FILLET1_R * 0.305995642671, -FILLET1_R * 0.49), (-FILLET1_R * 0.0115470053838, FILLET1_R * 0.02))
            Line((-FILLET1_R * 0.0115470053838, FILLET1_R * 0.02), (FILLET1_R * 0.57735026919, FILLET1_R * 0.02))
            Line((FILLET1_R * 0.57735026919, FILLET1_R * 0.02), (FILLET1_R * 0.57735026919, 0))
        make_face()
    fillet1_piece_18 = extrude(amount=4.041278679, mode=Mode.PRIVATE)
    fillet1_piece_18 = split(fillet1_piece_18, bisect_by=Plane(origin=(-9, 12.593724218, 9.60103013), z_dir=(1, 0, 0)), keep=Keep.TOP, mode=Mode.PRIVATE)
    fillet1_piece_18 = split(fillet1_piece_18, bisect_by=Plane(origin=(-8.906275782, 12.5, 9.60103013), z_dir=(0, 1, 0)), keep=Keep.TOP, mode=Mode.PRIVATE)
    add(fillet1_piece_18, mode=Mode.SUBTRACT)
    with BuildSketch(Plane(origin=(-10.916566667, 14.416566667, 11.416666667), x_dir=(-0.40824829046386607, -0.816496580927726, 0.4082482904638599), z_dir=(0.5773502691896258, -0.5773502691896258, -0.5773502691896258))) as fillet1_piece_19_section:
        with BuildLine():
            CenterArc((FILLET1_R * 0.57735026919, -FILLET1_R), FILLET1_R, 90, 60)
            Line((-FILLET1_R * 0.288675134595, -FILLET1_R * 0.5), (-FILLET1_R * 0.305995642671, -FILLET1_R * 0.49))
            Line((-FILLET1_R * 0.305995642671, -FILLET1_R * 0.49), (-FILLET1_R * 0.0115470053838, FILLET1_R * 0.02))
            Line((-FILLET1_R * 0.0115470053838, FILLET1_R * 0.02), (FILLET1_R * 0.57735026919, FILLET1_R * 0.02))
            Line((FILLET1_R * 0.57735026919, FILLET1_R * 0.02), (FILLET1_R * 0.57735026919, 0))
        make_face()
    fillet1_piece_19 = extrude(amount=4.041278679, mode=Mode.PRIVATE)
    fillet1_piece_19 = split(fillet1_piece_19, bisect_by=Plane(origin=(-9, 12.406275782, 9.60103013), z_dir=(-1, 0, 0)), keep=Keep.TOP, mode=Mode.PRIVATE)
    fillet1_piece_19 = split(fillet1_piece_19, bisect_by=Plane(origin=(-9.093724218, 12.5, 9.60103013), z_dir=(0, -1, 0)), keep=Keep.TOP, mode=Mode.PRIVATE)
    add(fillet1_piece_19, mode=Mode.SUBTRACT)
    with BuildSketch(Plane(origin=(-9, 12.5, 0.5), x_dir=(0, -1, 0), z_dir=(0, 0, 1))) as fillet1_piece_20a_section:
        with BuildLine():
            CenterArc((FILLET1_R, FILLET1_R), FILLET1_R, 180, 90)
            Line((0, FILLET1_R), (-FILLET1_R * 0.02, FILLET1_R))
            Line((-FILLET1_R * 0.02, FILLET1_R), (-FILLET1_R * 0.02, -FILLET1_R * 0.02))
            Line((-FILLET1_R * 0.02, -FILLET1_R * 0.02), (FILLET1_R, -FILLET1_R * 0.02))
            Line((FILLET1_R, -FILLET1_R * 0.02), (FILLET1_R, 0))
        make_face()
    fillet1_piece_20a = extrude(amount=10.2501, mode=Mode.PRIVATE)
    fillet1_piece_20a = split(fillet1_piece_20a, bisect_by=Plane(origin=(-9.246323412, 12.386715356, 9.746423412), z_dir=(0.7071067811865476, 0, 0.7071067811865476)), keep=Keep.TOP, mode=Mode.PRIVATE)
    fillet1_piece_20a = split(fillet1_piece_20a, bisect_by=Plane(origin=(-8.886715356, 12.746323412, 9.746423412), z_dir=(0, -0.7071067811865476, 0.7071067811865476)), keep=Keep.TOP, mode=Mode.PRIVATE)
    with BuildSketch(Plane(origin=(-10.916566667, 14.416566667, 11.416666667), x_dir=(-0.40824829046386607, -0.816496580927726, 0.4082482904638599), z_dir=(0.5773502691896258, -0.5773502691896258, -0.5773502691896258))) as fillet1_piece_20b_section:
        with BuildLine():
            CenterArc((FILLET1_R * 0.57735026919, -FILLET1_R), FILLET1_R, 90, 60)
            Line((-FILLET1_R * 0.288675134595, -FILLET1_R * 0.5), (-FILLET1_R * 0.305995642671, -FILLET1_R * 0.49))
            Line((-FILLET1_R * 0.305995642671, -FILLET1_R * 0.49), (-FILLET1_R * 0.0115470053838, FILLET1_R * 0.02))
            Line((-FILLET1_R * 0.0115470053838, FILLET1_R * 0.02), (FILLET1_R * 0.57735026919, FILLET1_R * 0.02))
            Line((FILLET1_R * 0.57735026919, FILLET1_R * 0.02), (FILLET1_R * 0.57735026919, 0))
        make_face()
    fillet1_piece_20b = extrude(amount=4.041278679, mode=Mode.PRIVATE)
    fillet1_piece_20b = split(fillet1_piece_20b, bisect_by=Plane(origin=(-9, 12.25202237, 9.326225221), z_dir=(1, 0, 0)), keep=Keep.TOP, mode=Mode.PRIVATE)
    fillet1_piece_20b = split(fillet1_piece_20b, bisect_by=Plane(origin=(-8.75202237, 12.5, 9.326225221), z_dir=(0, -1, 0)), keep=Keep.TOP, mode=Mode.PRIVATE)
    fillet1_piece_20 = fillet1_piece_20a & fillet1_piece_20b
    add(fillet1_piece_20, mode=Mode.SUBTRACT)
    with BuildSketch(Plane(origin=(9, 12.5, 0.5), x_dir=(0, -1, 0), z_dir=(0, 0, 1))) as fillet1_piece_21a_section:
        with BuildLine():
            CenterArc((FILLET1_R, -FILLET1_R), FILLET1_R, 90, 90)
            Line((0, -FILLET1_R), (-FILLET1_R * 0.02, -FILLET1_R))
            Line((-FILLET1_R * 0.02, -FILLET1_R), (-FILLET1_R * 0.02, FILLET1_R * 0.02))
            Line((-FILLET1_R * 0.02, FILLET1_R * 0.02), (FILLET1_R, FILLET1_R * 0.02))
            Line((FILLET1_R, FILLET1_R * 0.02), (FILLET1_R, 0))
        make_face()
    fillet1_piece_21a = extrude(amount=10.2501, mode=Mode.PRIVATE)
    fillet1_piece_21a = split(fillet1_piece_21a, bisect_by=Plane(origin=(9.246323412, 12.386715356, 9.746423412), z_dir=(-0.7071067811865476, 0, 0.7071067811865476)), keep=Keep.TOP, mode=Mode.PRIVATE)
    fillet1_piece_21a = split(fillet1_piece_21a, bisect_by=Plane(origin=(8.886715356, 12.746323412, 9.746423412), z_dir=(0, -0.7071067811865476, 0.7071067811865476)), keep=Keep.TOP, mode=Mode.PRIVATE)
    with BuildSketch(Plane(origin=(8.583333333, 12.083333333, 9.083433333), x_dir=(0.408248290463863, -0.816496580927726, 0.408248290463863), z_dir=(0.5773502691896258, 0.5773502691896258, 0.5773502691896258))) as fillet1_piece_21b_section:
        with BuildLine():
            CenterArc((FILLET1_R * 0.57735026919, -FILLET1_R), FILLET1_R, 90, 60)
            Line((-FILLET1_R * 0.288675134595, -FILLET1_R * 0.5), (-FILLET1_R * 0.305995642671, -FILLET1_R * 0.49))
            Line((-FILLET1_R * 0.305995642671, -FILLET1_R * 0.49), (-FILLET1_R * 0.0115470053838, FILLET1_R * 0.02))
            Line((-FILLET1_R * 0.0115470053838, FILLET1_R * 0.02), (FILLET1_R * 0.57735026919, FILLET1_R * 0.02))
            Line((FILLET1_R * 0.57735026919, FILLET1_R * 0.02), (FILLET1_R * 0.57735026919, 0))
        make_face()
    fillet1_piece_21b = extrude(amount=4.041278679, mode=Mode.PRIVATE)
    fillet1_piece_21b = split(fillet1_piece_21b, bisect_by=Plane(origin=(9, 12.25202237, 9.326225221), z_dir=(-1, 0, 0)), keep=Keep.TOP, mode=Mode.PRIVATE)
    fillet1_piece_21b = split(fillet1_piece_21b, bisect_by=Plane(origin=(8.75202237, 12.5, 9.326225221), z_dir=(0, -1, 0)), keep=Keep.TOP, mode=Mode.PRIVATE)
    fillet1_piece_21 = fillet1_piece_21a & fillet1_piece_21b
    add(fillet1_piece_21, mode=Mode.SUBTRACT)


solid = part.part
